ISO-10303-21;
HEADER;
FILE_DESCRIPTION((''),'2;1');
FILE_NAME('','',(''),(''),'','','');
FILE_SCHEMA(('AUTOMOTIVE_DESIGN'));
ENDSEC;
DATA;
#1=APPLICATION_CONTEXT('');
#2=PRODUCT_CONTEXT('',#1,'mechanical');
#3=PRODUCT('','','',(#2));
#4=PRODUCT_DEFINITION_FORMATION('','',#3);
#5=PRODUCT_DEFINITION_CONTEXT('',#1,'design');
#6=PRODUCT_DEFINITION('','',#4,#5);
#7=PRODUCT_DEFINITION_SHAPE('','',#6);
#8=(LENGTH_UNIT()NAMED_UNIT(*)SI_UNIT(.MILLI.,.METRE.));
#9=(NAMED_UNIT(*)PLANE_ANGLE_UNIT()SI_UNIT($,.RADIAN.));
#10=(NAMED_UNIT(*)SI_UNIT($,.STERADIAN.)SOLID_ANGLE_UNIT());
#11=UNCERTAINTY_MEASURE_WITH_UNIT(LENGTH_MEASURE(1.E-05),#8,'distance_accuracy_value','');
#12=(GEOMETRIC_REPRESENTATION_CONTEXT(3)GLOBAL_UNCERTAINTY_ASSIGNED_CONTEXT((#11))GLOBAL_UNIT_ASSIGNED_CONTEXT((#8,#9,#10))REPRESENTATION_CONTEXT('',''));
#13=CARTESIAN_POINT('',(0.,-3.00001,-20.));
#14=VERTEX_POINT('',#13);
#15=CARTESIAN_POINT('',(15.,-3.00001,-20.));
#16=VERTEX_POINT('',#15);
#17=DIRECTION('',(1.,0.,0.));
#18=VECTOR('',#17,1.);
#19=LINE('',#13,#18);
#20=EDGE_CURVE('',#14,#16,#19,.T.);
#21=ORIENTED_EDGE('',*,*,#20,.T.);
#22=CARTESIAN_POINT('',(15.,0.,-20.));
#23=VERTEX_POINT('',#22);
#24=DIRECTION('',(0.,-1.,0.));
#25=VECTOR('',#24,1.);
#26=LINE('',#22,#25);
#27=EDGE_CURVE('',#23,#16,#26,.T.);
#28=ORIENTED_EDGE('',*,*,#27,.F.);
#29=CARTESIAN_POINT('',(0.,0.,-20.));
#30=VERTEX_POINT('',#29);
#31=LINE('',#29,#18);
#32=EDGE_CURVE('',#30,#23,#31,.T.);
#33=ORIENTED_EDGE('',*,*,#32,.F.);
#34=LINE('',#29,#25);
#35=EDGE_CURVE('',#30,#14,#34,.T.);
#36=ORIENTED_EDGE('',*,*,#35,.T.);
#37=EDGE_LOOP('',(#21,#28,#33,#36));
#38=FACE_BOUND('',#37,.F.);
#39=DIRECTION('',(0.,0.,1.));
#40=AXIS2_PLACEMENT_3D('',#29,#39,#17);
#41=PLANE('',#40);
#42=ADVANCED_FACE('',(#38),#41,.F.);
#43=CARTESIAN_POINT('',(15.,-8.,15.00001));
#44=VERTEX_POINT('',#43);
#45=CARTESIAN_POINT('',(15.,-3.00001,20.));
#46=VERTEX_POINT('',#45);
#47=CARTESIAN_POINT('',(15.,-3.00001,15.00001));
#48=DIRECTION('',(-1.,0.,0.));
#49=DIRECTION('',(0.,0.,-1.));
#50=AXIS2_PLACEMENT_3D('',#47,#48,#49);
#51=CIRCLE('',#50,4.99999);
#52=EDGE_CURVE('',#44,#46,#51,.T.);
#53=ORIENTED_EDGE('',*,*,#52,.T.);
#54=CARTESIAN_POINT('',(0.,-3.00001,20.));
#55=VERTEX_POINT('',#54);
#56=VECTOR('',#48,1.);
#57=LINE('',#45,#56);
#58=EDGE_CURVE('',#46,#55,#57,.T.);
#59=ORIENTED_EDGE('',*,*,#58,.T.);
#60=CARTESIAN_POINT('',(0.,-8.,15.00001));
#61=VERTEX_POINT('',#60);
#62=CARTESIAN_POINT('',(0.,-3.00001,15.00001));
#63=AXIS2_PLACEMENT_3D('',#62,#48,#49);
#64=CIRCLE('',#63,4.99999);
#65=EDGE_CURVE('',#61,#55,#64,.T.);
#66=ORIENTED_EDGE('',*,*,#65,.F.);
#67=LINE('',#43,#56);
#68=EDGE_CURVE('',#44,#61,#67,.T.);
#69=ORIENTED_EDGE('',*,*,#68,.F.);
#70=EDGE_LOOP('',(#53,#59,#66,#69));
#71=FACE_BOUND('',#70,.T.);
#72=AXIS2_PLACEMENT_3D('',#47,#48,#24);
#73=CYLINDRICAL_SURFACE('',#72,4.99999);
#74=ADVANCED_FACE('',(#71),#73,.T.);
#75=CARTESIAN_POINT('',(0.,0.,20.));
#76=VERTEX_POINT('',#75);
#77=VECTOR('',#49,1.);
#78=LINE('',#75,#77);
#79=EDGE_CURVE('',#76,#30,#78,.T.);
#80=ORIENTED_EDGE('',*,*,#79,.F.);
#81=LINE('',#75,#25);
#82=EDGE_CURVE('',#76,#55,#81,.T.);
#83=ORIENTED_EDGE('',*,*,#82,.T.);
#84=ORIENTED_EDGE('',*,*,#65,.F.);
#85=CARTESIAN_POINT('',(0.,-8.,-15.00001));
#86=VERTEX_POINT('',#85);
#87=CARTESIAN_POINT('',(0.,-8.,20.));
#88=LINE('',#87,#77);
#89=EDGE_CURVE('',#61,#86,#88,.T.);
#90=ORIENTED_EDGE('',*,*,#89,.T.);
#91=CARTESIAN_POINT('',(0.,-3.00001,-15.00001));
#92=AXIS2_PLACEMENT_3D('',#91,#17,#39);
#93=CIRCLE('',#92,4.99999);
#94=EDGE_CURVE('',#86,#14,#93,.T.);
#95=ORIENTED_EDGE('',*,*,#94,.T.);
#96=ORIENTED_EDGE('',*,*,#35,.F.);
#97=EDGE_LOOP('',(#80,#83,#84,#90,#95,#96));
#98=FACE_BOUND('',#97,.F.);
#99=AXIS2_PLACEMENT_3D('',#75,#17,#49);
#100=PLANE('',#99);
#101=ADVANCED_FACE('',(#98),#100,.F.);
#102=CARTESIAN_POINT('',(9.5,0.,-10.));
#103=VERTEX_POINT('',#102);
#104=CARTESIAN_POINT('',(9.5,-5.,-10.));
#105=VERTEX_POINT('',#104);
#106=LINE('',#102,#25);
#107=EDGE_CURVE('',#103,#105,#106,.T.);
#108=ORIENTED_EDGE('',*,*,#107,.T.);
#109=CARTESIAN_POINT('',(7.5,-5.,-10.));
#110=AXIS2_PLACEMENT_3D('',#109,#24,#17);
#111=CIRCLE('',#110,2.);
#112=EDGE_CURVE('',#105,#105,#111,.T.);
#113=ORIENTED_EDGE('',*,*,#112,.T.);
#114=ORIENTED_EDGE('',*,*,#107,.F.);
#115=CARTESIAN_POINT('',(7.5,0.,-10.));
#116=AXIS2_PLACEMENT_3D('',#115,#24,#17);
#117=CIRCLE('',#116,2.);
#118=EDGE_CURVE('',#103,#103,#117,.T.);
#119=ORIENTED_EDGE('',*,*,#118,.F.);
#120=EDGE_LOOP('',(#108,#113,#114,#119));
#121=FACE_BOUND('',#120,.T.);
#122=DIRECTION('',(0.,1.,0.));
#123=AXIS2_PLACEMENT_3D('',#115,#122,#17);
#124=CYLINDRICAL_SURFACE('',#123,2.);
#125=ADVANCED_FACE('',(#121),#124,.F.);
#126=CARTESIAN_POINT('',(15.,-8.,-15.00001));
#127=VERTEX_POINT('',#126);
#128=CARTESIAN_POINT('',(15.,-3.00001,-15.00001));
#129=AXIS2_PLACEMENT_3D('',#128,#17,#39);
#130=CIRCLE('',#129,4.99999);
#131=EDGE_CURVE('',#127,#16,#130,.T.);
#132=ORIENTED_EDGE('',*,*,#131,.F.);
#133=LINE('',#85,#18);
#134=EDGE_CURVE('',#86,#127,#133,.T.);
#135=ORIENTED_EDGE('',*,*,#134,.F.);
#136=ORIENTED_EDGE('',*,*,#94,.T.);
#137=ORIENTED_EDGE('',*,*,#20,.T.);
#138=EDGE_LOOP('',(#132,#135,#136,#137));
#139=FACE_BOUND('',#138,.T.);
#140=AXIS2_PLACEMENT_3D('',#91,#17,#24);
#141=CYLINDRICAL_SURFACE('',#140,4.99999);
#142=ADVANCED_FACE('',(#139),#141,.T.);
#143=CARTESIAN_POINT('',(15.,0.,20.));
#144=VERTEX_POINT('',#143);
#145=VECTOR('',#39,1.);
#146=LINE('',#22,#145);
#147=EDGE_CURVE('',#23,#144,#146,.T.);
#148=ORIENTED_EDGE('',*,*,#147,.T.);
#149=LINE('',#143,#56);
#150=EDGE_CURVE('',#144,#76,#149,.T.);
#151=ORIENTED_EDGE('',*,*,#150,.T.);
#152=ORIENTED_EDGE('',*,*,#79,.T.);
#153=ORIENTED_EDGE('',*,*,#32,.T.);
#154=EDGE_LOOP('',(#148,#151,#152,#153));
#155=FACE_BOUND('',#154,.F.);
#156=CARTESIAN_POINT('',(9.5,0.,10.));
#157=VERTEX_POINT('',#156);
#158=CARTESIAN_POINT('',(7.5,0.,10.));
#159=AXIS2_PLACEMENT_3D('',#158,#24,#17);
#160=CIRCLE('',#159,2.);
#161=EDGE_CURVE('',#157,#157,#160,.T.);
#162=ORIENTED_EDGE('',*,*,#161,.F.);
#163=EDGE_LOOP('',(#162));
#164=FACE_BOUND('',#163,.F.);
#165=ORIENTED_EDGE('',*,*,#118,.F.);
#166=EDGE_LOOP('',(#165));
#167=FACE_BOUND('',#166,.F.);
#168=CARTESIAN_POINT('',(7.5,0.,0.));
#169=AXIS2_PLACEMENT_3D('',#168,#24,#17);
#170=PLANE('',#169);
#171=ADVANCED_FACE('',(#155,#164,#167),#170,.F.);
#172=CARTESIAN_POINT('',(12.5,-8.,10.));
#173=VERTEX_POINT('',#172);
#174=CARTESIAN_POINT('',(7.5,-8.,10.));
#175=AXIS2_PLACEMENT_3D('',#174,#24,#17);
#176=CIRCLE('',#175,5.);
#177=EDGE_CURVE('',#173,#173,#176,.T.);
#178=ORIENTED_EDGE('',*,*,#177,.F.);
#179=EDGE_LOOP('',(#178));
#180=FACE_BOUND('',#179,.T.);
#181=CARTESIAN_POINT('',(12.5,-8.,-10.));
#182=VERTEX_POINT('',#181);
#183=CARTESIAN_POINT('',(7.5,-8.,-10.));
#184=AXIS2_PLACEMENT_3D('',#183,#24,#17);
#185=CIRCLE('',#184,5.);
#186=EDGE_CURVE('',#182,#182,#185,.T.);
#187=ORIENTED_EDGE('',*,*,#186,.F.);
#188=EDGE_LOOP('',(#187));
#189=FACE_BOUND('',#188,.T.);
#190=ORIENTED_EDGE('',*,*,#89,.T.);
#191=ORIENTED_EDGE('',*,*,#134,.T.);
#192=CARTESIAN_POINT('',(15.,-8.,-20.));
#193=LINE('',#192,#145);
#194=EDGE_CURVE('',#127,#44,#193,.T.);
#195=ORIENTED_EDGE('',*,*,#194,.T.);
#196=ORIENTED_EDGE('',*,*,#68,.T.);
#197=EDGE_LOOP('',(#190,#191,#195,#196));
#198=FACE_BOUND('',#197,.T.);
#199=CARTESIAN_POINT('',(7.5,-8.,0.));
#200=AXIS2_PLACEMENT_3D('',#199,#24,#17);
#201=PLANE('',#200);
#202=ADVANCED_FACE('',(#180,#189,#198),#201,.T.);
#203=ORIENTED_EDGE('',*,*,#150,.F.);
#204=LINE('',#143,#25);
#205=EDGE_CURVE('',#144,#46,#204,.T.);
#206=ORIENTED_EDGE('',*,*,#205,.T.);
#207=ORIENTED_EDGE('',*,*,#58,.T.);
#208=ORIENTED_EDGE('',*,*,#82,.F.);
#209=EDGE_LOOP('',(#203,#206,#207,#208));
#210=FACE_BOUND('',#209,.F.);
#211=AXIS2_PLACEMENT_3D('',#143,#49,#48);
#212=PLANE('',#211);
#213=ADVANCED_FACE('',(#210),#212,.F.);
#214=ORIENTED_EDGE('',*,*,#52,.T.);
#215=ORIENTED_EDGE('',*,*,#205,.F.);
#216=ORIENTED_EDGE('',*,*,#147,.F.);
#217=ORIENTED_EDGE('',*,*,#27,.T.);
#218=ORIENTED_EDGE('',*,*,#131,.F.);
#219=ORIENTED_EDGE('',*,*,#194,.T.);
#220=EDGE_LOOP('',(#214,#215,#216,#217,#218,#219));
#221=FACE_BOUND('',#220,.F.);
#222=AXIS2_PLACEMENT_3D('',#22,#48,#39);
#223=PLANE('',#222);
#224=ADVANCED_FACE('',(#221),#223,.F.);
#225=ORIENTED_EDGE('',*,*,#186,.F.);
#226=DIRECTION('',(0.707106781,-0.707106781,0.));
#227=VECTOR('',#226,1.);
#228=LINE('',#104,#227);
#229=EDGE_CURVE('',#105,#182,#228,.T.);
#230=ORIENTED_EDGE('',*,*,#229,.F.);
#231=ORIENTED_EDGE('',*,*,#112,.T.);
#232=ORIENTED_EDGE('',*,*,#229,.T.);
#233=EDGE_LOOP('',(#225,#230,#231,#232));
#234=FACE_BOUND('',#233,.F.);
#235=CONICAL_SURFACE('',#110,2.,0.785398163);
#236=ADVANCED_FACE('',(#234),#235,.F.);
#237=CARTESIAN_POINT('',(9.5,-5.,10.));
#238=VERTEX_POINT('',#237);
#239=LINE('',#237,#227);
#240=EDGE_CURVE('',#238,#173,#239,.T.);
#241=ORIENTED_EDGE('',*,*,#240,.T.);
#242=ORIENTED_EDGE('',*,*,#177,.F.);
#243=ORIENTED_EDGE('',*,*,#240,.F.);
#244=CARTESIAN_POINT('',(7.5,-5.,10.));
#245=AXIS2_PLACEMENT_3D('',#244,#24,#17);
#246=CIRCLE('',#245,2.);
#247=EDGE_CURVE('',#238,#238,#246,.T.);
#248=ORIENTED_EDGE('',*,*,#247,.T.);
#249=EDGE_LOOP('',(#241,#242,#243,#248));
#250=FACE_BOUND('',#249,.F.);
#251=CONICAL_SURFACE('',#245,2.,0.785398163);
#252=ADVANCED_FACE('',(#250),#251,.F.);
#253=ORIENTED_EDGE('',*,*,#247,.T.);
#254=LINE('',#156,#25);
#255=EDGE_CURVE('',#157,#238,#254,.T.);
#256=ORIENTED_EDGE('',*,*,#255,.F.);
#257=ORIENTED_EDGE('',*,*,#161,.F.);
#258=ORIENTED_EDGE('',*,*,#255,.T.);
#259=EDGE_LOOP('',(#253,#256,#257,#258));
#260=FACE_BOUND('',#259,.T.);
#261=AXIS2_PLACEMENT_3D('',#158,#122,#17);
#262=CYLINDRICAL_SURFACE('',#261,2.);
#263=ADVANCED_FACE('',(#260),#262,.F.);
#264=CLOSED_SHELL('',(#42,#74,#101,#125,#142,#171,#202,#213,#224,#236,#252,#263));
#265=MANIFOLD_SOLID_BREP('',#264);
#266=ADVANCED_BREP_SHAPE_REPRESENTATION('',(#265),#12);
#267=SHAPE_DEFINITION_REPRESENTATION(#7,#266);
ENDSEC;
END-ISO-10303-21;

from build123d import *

# Parameters (mm, degrees)
F0_R     = 2
F1_DEPTH = 8
F2_SIZE  = 3
F3_R     = 4.99999


# Not quite as in the source:
# - a fillet or chamfer is up to 0.001 mm smaller than in the source, because OpenCascade refuses the exact size


with BuildPart() as f1:
    # F0 (on Front) → F1 (new body)
    with BuildSketch(Plane.XZ):
        Polygon((0, 20), (0, 0), (0, -20), (15, -20), (15, 0), (15, 20), align=None)
        with Locations((7.5, -10)):
            Circle(F0_R, mode=Mode.SUBTRACT)
        with Locations((7.5, 10)):
            Circle(F0_R, mode=Mode.SUBTRACT)
    extrude(amount=F1_DEPTH)

    # F2
    f2_edges = [f1.edges().sort_by_distance(p)[0] for p in [
        (5.5, -8, 10),
        (5.5, -8, -10),
    ]]
    chamfer(f2_edges, length=F2_SIZE)

    # F3 (radius 5 in the source; OpenCascade refuses exactly that, so slightly less here)
    f3_edges = [f1.edges().sort_by_distance(p)[0] for p in [
        (7.5, -8, 20),
        (7.5, -8, -20),
    ]]
    fillet(f3_edges, radius=F3_R)


solid = f1.part
